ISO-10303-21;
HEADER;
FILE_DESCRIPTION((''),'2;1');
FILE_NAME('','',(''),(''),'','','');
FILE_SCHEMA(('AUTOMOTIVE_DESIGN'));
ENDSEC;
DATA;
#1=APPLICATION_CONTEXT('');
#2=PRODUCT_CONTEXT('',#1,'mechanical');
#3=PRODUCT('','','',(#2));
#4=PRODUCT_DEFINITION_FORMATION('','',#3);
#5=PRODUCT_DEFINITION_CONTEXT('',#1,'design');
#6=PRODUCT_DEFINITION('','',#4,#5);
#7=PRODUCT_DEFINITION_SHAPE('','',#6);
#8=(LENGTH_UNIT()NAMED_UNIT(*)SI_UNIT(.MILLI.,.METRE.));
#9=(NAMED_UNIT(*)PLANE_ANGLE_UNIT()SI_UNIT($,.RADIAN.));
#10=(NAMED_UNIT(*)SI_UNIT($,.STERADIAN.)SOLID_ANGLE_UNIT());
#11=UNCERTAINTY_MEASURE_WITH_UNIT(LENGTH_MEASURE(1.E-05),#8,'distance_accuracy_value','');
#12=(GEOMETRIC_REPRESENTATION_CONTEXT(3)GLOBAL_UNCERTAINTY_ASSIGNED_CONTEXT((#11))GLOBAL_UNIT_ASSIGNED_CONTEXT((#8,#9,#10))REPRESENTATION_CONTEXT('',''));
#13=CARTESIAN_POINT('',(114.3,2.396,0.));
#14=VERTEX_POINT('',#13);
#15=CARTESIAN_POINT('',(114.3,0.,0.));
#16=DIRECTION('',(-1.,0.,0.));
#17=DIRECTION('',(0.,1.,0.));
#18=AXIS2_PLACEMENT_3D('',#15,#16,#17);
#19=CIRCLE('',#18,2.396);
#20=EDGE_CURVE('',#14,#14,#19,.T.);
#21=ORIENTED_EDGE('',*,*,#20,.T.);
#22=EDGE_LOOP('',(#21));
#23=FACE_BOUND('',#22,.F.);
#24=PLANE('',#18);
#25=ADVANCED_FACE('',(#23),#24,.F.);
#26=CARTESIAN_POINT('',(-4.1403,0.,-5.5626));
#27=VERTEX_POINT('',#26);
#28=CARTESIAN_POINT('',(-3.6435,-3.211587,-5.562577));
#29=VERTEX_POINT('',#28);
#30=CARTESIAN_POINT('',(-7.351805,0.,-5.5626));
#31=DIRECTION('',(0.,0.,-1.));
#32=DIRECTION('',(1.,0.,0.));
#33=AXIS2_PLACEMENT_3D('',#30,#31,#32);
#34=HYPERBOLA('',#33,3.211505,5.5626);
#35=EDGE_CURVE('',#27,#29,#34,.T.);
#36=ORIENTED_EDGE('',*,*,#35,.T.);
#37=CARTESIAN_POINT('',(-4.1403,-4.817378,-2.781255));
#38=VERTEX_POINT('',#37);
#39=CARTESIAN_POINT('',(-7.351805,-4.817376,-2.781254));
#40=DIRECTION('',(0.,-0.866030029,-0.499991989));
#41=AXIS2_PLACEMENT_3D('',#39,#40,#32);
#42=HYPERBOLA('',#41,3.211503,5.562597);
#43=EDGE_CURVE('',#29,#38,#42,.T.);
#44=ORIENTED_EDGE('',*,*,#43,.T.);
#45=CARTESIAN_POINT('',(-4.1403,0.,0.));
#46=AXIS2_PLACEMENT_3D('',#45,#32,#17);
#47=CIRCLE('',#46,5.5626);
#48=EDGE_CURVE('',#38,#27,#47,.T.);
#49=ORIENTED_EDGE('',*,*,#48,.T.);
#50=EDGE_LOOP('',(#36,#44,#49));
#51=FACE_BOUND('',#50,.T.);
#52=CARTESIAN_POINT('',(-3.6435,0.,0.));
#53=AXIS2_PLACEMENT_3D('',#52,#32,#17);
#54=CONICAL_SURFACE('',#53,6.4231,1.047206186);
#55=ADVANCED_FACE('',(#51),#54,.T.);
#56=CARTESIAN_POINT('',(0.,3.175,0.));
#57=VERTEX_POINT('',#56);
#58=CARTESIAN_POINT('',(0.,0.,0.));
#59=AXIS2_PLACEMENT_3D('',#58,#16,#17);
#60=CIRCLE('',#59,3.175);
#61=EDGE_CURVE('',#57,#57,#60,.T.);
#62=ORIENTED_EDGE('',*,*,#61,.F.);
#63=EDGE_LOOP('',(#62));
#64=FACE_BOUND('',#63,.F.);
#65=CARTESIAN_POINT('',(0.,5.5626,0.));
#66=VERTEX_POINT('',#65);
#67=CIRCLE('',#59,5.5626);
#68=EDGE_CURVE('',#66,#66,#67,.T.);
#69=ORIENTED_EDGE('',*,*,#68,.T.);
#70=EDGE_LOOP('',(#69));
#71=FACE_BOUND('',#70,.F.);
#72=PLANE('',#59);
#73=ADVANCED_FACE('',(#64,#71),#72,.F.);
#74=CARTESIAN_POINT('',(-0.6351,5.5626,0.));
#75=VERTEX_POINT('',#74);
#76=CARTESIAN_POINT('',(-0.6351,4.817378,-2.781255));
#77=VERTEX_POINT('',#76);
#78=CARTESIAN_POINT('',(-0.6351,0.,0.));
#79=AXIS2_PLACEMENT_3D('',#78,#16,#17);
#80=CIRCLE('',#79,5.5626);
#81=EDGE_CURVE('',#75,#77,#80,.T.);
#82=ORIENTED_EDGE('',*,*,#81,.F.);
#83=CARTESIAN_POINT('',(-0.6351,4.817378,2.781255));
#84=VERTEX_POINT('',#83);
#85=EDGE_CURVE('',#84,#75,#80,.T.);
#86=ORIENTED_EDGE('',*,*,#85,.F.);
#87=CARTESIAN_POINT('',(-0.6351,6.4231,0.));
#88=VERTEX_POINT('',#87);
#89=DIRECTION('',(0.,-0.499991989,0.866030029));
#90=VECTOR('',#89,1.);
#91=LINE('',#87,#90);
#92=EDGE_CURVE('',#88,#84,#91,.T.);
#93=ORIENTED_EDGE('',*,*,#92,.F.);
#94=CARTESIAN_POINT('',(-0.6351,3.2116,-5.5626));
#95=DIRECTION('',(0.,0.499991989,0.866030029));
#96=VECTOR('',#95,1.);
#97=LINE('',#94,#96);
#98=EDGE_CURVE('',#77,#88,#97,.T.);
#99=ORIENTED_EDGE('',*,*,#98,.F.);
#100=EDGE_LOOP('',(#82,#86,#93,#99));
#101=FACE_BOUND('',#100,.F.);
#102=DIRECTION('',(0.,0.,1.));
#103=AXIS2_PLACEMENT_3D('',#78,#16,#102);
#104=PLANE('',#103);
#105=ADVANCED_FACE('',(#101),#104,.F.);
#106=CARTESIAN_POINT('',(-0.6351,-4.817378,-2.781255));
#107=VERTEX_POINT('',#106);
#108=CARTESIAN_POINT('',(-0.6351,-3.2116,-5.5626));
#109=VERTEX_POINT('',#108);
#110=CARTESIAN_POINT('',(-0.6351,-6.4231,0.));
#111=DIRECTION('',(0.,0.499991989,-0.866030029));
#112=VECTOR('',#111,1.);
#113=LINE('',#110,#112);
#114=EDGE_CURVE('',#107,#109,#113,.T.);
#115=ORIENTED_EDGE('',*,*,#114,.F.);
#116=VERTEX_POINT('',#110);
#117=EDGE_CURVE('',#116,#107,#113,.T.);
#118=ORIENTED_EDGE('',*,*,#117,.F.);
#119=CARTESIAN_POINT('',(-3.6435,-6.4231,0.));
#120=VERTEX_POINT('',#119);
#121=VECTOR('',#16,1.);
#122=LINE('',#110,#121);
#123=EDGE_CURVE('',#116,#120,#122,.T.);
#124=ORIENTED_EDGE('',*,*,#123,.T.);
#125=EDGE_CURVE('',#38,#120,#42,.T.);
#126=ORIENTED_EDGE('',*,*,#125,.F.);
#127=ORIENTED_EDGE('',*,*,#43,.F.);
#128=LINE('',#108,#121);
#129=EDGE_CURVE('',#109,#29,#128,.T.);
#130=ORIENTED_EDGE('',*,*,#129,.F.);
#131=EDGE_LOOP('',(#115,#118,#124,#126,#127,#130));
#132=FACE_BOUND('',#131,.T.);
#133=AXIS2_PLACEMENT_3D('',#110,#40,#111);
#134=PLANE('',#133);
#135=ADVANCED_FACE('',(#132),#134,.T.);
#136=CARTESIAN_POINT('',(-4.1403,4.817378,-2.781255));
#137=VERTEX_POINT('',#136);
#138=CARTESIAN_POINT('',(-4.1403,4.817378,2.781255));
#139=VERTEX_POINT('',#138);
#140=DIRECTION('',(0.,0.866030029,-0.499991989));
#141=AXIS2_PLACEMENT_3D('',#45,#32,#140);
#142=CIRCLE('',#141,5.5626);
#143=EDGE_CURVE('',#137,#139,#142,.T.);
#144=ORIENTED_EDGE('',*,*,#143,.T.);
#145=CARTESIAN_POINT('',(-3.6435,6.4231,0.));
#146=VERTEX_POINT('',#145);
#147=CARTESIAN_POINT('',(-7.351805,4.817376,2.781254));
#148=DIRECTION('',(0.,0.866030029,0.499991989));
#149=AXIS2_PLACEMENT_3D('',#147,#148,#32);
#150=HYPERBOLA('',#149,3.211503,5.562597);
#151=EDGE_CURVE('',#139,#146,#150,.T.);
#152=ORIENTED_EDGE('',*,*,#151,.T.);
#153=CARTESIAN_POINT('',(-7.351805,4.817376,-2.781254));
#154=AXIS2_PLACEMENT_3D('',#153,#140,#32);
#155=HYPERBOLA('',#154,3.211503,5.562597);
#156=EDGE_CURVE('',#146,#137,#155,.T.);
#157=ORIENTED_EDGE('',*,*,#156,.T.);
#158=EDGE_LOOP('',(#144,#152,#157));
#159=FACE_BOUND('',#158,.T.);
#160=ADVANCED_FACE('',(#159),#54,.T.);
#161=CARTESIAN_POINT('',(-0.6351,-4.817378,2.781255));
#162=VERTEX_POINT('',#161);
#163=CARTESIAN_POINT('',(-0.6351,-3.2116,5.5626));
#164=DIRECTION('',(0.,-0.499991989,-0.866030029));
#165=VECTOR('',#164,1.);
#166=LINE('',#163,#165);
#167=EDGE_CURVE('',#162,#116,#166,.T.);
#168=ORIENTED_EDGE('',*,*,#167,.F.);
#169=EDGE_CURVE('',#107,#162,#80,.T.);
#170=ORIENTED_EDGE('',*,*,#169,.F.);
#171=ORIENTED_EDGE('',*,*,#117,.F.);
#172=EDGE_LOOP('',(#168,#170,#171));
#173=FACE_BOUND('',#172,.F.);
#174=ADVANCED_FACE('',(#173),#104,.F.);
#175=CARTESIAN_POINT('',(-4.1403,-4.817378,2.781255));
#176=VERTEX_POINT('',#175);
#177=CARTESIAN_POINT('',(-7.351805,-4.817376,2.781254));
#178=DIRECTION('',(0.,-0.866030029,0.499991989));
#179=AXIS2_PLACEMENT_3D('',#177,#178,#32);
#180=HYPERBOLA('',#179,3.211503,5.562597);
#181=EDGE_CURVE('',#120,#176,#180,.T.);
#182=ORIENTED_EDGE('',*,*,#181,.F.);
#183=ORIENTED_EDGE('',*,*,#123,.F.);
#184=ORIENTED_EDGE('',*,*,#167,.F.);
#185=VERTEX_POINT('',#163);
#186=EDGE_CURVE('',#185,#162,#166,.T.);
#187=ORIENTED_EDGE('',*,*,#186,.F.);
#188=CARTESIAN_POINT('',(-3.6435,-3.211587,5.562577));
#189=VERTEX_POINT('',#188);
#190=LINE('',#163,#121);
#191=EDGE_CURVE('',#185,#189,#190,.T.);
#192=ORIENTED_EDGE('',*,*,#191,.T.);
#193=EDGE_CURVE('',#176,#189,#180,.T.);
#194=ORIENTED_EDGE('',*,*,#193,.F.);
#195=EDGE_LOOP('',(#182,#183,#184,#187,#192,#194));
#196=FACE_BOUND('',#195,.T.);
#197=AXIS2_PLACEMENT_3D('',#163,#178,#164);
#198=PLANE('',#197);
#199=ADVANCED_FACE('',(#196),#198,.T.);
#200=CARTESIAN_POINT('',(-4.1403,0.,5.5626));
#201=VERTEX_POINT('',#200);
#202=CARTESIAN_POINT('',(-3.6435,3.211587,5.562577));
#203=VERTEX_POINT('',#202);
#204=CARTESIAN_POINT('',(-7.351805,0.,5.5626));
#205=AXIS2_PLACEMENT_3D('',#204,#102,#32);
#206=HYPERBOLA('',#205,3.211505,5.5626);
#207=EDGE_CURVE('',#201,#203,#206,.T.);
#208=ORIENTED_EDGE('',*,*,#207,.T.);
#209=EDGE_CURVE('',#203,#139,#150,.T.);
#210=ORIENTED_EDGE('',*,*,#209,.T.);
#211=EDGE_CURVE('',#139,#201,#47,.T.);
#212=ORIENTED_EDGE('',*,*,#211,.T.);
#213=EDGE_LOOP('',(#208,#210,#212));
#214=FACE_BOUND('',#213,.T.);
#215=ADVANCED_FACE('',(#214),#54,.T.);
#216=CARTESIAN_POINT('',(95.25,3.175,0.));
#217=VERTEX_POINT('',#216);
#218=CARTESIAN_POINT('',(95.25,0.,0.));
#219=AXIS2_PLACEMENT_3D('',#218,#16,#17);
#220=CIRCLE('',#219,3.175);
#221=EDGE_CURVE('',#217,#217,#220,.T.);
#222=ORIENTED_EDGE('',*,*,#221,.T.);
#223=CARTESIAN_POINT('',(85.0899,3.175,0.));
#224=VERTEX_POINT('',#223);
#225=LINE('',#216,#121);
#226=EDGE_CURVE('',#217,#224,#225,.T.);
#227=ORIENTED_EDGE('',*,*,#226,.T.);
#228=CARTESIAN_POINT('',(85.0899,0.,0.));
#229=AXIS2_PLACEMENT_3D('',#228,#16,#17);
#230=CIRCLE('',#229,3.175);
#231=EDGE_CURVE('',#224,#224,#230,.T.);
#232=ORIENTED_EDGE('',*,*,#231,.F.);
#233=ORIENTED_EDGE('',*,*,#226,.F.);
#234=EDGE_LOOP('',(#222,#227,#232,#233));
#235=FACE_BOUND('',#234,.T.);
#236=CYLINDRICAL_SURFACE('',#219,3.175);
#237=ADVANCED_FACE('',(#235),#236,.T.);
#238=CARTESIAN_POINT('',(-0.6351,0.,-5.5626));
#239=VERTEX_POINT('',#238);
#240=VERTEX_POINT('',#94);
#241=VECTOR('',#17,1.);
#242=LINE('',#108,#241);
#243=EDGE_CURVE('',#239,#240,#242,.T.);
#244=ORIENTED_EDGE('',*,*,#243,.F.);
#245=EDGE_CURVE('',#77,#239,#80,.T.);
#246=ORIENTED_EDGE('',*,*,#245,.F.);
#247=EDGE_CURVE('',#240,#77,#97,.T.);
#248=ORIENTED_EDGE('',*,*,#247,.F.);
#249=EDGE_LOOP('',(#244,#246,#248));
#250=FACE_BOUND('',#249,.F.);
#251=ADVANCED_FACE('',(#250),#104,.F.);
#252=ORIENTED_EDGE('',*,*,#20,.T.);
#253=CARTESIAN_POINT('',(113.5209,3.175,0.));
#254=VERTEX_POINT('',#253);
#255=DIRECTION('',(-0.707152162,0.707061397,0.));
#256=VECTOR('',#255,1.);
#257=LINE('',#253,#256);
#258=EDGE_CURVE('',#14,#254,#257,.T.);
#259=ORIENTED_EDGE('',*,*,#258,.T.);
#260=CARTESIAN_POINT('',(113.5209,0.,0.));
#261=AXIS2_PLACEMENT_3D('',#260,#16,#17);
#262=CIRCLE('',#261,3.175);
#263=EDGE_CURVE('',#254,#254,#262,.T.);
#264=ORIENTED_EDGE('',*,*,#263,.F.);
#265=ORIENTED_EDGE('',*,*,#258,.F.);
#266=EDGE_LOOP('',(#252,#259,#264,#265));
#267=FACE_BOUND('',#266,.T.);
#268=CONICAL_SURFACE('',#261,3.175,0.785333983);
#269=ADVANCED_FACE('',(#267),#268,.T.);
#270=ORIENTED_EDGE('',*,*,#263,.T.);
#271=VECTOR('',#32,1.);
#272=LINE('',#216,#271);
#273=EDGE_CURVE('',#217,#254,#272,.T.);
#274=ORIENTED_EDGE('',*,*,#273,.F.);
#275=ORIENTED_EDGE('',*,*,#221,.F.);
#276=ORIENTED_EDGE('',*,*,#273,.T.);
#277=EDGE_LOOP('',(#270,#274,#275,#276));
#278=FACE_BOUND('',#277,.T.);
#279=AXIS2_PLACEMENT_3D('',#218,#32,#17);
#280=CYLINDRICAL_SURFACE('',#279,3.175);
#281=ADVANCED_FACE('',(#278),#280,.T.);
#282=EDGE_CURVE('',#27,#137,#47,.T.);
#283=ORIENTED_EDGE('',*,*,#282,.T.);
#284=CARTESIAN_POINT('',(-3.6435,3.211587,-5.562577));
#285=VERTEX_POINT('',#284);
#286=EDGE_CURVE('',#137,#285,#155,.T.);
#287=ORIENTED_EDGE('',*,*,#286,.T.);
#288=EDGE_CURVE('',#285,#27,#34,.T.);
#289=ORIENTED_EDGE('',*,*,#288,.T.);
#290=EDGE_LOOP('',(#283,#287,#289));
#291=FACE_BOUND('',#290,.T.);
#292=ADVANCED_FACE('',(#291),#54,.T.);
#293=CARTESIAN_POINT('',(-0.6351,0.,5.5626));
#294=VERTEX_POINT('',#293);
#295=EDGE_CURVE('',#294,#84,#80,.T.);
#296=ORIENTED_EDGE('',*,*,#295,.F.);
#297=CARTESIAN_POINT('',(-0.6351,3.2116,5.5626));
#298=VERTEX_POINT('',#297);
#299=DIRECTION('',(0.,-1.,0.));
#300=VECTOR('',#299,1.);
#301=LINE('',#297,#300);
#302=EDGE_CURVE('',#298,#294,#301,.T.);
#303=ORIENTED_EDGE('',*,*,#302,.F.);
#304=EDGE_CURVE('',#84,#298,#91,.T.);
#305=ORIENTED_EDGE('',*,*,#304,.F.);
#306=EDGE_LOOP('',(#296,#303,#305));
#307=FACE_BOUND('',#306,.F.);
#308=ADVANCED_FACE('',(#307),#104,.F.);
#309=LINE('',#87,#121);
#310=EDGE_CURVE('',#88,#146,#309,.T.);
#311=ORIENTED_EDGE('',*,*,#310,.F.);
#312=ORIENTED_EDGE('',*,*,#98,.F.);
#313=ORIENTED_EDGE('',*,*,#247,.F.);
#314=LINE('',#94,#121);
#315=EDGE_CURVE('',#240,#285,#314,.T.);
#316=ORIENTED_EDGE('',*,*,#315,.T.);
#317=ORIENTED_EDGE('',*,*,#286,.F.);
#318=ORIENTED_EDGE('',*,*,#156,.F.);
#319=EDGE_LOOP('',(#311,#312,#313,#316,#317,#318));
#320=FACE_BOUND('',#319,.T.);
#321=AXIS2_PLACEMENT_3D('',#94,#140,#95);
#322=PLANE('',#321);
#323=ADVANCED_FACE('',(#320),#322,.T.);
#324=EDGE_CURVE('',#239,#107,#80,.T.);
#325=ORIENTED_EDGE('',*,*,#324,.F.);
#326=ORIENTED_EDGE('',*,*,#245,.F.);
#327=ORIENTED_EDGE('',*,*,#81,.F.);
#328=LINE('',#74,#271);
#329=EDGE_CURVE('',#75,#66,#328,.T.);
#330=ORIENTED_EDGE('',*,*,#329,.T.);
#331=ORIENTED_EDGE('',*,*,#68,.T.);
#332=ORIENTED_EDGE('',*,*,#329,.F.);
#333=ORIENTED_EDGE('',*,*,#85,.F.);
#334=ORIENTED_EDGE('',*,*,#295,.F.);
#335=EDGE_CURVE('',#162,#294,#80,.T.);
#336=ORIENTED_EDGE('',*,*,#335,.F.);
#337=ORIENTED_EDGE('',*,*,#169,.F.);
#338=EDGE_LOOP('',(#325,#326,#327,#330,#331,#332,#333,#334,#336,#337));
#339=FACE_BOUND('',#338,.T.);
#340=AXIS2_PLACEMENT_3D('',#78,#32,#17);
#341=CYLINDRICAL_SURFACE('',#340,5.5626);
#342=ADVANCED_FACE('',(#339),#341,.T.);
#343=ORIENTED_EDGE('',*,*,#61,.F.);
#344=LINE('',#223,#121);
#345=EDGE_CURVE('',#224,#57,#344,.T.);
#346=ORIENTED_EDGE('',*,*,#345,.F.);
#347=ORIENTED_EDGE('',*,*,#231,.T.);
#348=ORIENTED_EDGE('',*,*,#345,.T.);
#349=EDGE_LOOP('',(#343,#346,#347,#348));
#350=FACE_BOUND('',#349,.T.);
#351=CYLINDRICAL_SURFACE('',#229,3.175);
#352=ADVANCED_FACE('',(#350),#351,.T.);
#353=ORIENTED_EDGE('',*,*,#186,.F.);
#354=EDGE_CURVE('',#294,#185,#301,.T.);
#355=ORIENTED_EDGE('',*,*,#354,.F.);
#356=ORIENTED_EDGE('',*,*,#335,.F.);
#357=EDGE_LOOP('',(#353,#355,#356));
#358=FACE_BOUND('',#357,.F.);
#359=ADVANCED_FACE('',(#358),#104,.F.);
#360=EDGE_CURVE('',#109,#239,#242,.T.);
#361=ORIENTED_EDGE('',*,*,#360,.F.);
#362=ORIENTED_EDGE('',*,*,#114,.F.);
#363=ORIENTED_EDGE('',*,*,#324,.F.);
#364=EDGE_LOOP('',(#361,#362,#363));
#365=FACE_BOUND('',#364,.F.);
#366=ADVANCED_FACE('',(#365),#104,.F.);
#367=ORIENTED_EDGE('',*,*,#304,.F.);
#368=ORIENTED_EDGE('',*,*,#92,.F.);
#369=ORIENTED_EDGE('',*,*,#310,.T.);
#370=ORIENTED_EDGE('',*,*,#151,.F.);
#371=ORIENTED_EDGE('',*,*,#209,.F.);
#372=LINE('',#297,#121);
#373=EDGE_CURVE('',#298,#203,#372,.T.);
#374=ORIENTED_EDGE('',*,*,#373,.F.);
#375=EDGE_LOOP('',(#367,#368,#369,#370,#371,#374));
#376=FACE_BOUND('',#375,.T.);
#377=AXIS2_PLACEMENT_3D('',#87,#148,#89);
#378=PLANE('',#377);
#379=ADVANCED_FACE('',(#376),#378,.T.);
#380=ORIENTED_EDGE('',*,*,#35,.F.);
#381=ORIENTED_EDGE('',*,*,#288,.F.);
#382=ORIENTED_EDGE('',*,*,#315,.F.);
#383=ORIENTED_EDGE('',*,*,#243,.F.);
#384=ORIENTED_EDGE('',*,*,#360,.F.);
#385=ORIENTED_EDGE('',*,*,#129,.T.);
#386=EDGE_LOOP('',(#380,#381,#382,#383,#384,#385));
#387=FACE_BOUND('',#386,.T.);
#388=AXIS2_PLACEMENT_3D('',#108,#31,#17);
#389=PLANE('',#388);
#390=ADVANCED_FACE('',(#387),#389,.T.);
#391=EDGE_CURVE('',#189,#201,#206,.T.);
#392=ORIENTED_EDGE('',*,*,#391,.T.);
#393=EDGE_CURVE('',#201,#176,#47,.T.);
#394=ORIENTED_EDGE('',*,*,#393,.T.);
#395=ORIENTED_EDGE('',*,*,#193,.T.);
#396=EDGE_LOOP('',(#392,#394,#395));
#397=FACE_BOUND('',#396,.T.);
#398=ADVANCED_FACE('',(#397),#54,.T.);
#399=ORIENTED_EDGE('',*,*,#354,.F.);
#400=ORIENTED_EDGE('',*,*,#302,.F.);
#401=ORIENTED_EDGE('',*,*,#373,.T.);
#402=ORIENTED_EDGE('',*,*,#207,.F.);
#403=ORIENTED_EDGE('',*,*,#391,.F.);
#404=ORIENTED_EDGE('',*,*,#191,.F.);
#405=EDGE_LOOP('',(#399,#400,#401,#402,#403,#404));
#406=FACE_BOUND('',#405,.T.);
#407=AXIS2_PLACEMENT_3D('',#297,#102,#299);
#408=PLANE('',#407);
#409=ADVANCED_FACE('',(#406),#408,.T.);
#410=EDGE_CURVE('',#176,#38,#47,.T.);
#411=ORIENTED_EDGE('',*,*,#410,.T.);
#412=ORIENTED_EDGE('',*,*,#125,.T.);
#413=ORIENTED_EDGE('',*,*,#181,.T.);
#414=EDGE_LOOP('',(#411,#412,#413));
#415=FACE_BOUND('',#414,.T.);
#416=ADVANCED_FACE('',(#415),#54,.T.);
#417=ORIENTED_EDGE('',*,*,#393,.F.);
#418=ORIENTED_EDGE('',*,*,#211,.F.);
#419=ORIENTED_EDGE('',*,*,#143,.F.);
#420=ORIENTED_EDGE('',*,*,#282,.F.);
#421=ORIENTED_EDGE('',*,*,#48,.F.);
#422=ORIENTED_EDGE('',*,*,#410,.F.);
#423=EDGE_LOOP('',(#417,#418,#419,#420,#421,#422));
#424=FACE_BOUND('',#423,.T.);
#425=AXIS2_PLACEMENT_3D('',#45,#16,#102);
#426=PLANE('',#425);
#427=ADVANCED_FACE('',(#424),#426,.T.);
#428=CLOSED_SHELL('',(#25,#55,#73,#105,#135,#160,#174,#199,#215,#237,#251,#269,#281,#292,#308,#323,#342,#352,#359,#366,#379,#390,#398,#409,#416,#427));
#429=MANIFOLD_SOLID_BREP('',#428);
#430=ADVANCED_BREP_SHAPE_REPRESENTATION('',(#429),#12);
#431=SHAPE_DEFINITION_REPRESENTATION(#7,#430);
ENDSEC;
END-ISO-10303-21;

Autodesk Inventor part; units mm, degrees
ref_plane "YZ Plane" through (0, 0, 0) normal (1, 0, 0) x (0, 1, 0)
ref_plane "XZ Plane" through (0, 0, 0) normal (0, 1, 0) x (-1, 0, 0)
sketch "Sketch1" plane through (0, 0, 0) normal (0, 0, 1) x (1, 0, 0)
  line L0 (0, 5.5626) -> (0, 3.175)
  line L1 (95.25, 3.175) -> (114.3, 3.175)
  line L2 (114.3, 3.175) -> (114.3, 0)
  line L3 (114.3, 0) -> (-0.6351, 0)
  line L4 (-23.6221, 0) -> (137.287, 0) projected
  line L5 (-0.6351, 0) -> (-0.6351, 5.5626)
  line L6 (-0.6351, 5.5626) -> (0, 5.5626)
  line L7 (95.25, 3.175) -> (85.0899, 3.175)
  line L8 (85.0899, 3.175) -> (0, 3.175)
  line L9 (0, -1.1125) -> (0, 6.6751) projected
  dimension "d0" = 114.3
  dimension "d1" = 19.05
  dimension "d2" = 6.35
  dimension "d9" = 0.6351
  dimension "d10" = 11.1252
  dimension "d13" = 10.1601
  dimension "d14" = 6.35
revolve "Body" add sketch "Sketch1" angle 360 about axis through (114.3, 0, 0) along (-1, 0, 0)
sketch "Sketch2" plane through (-0.6351, 0, 0) normal (-1, 0, 0) x (0, 0, 1)
  line L0 (0, 6.4231) -> (5.5626, 3.2116)
  line L1 (5.5626, 3.2116) -> (5.5626, -3.2116)
  line L2 (5.5626, -3.2116) -> (0, -6.4231)
  line L3 (0, -6.4231) -> (-5.5626, -3.2116)
  line L4 (-5.5626, -3.2116) -> (-5.5626, 3.2116)
  line L5 (-5.5626, 3.2116) -> (0, 6.4231)
  point P0 (0, 0)
  point P1 (0, 0)
  dimension "d11" = 11.1252
extrude "Head" add sketch "Sketch2" along normal blind 3.5052
sketch "Sketch4" plane through (0, 0, 0) normal (0, 0, 1) x (1, 0, 0)
  line L0 (-4.1403, 5.5626) -> (-4.1403, 6.4231)
  line L1 (-4.1403, 6.4231) -> (-3.6435, 6.4231)
  line L2 (-3.6435, 6.4231) -> (-4.1403, 5.5626)
  line L3 (-4.8413, 0) -> (0.0659, 0) projected
  line L4 (-0.6351, 6.4231) -> (-4.1403, 6.4231) projected
  line L5 (-4.1403, 3.2116) -> (-4.1403, 6.4231) projected
  dimension "d5" = 30
  dimension "d19" = 11.1252
revolve "Chamfer1" cut sketch "Sketch4" angle 360 about axis through (-10, 0, 0) along (1, 0, 0)
thread "Thread" size "1/4-20 UNC" class "2A" standard "ANSI Unified Screw Threads" length 19.05
chamfer "Chamfer2" distance 0.779 distance2 0.7791 1 edges at (114.3, -3.175, 0) measured on face at (114.3, 0.6107, -1.4381)
ref_plane "Work Plane1" through (1.525, 0, 0) normal (0, 0, 1) x (1, 0, 0)
equation "\"d0\" = NLG"
equation "\"d1\" = GEL"
equation "\"d2\" = GD"
equation "\"d10\" = SD2"
equation "\"d14\" = BDM"
equation "\"d11\" = SW"
equation "\"d3\" = KOH - SD"
equation "\"d5\" = ANG1"
equation "\"d19\" = SW0"
equation "\"d15\" = GEL"
equation "\"d6\" = -0.5 * SPD + 0.5 * GD"
equation "\"NLG\" = 114.3"
equation "\"GD\" = 6.35"
equation "\"BDM\" = 6.35"
equation "\"KOH\" = 4.1402"
equation "\"GEL\" = 19.05"
equation "\"SW\" = 11.1252"
equation "\"SW0\" = SW"
equation "\"SPD\" = GD1"
equation "\"SD2\" = SW"
equation "\"SD\" = 0.635"
equation "\"ANG1\" = 30deg"
equation "\"GAL\" = 10.16"
equation "\"GUL\" = 0.77902"
equation "\"RR\" = 0.381"
equation "\"WFT\" = SD"
equation "\"GD1\" = 4.79196"
equation "\"THREADDIA\" = 6.35"
equation "\"SDH\" = SW"
equation "\"SDHG\" = 85.09"
equation "\"TOA\" = 30deg"
equation "\"FAWI\" = 45deg"
equation "\"NND\" = 6.35"
equation "\"E0\" = 12.84961"
properties part number "AS 2465 - 1/4 x 4 1/2  UNC" material "Steel, Mild"
